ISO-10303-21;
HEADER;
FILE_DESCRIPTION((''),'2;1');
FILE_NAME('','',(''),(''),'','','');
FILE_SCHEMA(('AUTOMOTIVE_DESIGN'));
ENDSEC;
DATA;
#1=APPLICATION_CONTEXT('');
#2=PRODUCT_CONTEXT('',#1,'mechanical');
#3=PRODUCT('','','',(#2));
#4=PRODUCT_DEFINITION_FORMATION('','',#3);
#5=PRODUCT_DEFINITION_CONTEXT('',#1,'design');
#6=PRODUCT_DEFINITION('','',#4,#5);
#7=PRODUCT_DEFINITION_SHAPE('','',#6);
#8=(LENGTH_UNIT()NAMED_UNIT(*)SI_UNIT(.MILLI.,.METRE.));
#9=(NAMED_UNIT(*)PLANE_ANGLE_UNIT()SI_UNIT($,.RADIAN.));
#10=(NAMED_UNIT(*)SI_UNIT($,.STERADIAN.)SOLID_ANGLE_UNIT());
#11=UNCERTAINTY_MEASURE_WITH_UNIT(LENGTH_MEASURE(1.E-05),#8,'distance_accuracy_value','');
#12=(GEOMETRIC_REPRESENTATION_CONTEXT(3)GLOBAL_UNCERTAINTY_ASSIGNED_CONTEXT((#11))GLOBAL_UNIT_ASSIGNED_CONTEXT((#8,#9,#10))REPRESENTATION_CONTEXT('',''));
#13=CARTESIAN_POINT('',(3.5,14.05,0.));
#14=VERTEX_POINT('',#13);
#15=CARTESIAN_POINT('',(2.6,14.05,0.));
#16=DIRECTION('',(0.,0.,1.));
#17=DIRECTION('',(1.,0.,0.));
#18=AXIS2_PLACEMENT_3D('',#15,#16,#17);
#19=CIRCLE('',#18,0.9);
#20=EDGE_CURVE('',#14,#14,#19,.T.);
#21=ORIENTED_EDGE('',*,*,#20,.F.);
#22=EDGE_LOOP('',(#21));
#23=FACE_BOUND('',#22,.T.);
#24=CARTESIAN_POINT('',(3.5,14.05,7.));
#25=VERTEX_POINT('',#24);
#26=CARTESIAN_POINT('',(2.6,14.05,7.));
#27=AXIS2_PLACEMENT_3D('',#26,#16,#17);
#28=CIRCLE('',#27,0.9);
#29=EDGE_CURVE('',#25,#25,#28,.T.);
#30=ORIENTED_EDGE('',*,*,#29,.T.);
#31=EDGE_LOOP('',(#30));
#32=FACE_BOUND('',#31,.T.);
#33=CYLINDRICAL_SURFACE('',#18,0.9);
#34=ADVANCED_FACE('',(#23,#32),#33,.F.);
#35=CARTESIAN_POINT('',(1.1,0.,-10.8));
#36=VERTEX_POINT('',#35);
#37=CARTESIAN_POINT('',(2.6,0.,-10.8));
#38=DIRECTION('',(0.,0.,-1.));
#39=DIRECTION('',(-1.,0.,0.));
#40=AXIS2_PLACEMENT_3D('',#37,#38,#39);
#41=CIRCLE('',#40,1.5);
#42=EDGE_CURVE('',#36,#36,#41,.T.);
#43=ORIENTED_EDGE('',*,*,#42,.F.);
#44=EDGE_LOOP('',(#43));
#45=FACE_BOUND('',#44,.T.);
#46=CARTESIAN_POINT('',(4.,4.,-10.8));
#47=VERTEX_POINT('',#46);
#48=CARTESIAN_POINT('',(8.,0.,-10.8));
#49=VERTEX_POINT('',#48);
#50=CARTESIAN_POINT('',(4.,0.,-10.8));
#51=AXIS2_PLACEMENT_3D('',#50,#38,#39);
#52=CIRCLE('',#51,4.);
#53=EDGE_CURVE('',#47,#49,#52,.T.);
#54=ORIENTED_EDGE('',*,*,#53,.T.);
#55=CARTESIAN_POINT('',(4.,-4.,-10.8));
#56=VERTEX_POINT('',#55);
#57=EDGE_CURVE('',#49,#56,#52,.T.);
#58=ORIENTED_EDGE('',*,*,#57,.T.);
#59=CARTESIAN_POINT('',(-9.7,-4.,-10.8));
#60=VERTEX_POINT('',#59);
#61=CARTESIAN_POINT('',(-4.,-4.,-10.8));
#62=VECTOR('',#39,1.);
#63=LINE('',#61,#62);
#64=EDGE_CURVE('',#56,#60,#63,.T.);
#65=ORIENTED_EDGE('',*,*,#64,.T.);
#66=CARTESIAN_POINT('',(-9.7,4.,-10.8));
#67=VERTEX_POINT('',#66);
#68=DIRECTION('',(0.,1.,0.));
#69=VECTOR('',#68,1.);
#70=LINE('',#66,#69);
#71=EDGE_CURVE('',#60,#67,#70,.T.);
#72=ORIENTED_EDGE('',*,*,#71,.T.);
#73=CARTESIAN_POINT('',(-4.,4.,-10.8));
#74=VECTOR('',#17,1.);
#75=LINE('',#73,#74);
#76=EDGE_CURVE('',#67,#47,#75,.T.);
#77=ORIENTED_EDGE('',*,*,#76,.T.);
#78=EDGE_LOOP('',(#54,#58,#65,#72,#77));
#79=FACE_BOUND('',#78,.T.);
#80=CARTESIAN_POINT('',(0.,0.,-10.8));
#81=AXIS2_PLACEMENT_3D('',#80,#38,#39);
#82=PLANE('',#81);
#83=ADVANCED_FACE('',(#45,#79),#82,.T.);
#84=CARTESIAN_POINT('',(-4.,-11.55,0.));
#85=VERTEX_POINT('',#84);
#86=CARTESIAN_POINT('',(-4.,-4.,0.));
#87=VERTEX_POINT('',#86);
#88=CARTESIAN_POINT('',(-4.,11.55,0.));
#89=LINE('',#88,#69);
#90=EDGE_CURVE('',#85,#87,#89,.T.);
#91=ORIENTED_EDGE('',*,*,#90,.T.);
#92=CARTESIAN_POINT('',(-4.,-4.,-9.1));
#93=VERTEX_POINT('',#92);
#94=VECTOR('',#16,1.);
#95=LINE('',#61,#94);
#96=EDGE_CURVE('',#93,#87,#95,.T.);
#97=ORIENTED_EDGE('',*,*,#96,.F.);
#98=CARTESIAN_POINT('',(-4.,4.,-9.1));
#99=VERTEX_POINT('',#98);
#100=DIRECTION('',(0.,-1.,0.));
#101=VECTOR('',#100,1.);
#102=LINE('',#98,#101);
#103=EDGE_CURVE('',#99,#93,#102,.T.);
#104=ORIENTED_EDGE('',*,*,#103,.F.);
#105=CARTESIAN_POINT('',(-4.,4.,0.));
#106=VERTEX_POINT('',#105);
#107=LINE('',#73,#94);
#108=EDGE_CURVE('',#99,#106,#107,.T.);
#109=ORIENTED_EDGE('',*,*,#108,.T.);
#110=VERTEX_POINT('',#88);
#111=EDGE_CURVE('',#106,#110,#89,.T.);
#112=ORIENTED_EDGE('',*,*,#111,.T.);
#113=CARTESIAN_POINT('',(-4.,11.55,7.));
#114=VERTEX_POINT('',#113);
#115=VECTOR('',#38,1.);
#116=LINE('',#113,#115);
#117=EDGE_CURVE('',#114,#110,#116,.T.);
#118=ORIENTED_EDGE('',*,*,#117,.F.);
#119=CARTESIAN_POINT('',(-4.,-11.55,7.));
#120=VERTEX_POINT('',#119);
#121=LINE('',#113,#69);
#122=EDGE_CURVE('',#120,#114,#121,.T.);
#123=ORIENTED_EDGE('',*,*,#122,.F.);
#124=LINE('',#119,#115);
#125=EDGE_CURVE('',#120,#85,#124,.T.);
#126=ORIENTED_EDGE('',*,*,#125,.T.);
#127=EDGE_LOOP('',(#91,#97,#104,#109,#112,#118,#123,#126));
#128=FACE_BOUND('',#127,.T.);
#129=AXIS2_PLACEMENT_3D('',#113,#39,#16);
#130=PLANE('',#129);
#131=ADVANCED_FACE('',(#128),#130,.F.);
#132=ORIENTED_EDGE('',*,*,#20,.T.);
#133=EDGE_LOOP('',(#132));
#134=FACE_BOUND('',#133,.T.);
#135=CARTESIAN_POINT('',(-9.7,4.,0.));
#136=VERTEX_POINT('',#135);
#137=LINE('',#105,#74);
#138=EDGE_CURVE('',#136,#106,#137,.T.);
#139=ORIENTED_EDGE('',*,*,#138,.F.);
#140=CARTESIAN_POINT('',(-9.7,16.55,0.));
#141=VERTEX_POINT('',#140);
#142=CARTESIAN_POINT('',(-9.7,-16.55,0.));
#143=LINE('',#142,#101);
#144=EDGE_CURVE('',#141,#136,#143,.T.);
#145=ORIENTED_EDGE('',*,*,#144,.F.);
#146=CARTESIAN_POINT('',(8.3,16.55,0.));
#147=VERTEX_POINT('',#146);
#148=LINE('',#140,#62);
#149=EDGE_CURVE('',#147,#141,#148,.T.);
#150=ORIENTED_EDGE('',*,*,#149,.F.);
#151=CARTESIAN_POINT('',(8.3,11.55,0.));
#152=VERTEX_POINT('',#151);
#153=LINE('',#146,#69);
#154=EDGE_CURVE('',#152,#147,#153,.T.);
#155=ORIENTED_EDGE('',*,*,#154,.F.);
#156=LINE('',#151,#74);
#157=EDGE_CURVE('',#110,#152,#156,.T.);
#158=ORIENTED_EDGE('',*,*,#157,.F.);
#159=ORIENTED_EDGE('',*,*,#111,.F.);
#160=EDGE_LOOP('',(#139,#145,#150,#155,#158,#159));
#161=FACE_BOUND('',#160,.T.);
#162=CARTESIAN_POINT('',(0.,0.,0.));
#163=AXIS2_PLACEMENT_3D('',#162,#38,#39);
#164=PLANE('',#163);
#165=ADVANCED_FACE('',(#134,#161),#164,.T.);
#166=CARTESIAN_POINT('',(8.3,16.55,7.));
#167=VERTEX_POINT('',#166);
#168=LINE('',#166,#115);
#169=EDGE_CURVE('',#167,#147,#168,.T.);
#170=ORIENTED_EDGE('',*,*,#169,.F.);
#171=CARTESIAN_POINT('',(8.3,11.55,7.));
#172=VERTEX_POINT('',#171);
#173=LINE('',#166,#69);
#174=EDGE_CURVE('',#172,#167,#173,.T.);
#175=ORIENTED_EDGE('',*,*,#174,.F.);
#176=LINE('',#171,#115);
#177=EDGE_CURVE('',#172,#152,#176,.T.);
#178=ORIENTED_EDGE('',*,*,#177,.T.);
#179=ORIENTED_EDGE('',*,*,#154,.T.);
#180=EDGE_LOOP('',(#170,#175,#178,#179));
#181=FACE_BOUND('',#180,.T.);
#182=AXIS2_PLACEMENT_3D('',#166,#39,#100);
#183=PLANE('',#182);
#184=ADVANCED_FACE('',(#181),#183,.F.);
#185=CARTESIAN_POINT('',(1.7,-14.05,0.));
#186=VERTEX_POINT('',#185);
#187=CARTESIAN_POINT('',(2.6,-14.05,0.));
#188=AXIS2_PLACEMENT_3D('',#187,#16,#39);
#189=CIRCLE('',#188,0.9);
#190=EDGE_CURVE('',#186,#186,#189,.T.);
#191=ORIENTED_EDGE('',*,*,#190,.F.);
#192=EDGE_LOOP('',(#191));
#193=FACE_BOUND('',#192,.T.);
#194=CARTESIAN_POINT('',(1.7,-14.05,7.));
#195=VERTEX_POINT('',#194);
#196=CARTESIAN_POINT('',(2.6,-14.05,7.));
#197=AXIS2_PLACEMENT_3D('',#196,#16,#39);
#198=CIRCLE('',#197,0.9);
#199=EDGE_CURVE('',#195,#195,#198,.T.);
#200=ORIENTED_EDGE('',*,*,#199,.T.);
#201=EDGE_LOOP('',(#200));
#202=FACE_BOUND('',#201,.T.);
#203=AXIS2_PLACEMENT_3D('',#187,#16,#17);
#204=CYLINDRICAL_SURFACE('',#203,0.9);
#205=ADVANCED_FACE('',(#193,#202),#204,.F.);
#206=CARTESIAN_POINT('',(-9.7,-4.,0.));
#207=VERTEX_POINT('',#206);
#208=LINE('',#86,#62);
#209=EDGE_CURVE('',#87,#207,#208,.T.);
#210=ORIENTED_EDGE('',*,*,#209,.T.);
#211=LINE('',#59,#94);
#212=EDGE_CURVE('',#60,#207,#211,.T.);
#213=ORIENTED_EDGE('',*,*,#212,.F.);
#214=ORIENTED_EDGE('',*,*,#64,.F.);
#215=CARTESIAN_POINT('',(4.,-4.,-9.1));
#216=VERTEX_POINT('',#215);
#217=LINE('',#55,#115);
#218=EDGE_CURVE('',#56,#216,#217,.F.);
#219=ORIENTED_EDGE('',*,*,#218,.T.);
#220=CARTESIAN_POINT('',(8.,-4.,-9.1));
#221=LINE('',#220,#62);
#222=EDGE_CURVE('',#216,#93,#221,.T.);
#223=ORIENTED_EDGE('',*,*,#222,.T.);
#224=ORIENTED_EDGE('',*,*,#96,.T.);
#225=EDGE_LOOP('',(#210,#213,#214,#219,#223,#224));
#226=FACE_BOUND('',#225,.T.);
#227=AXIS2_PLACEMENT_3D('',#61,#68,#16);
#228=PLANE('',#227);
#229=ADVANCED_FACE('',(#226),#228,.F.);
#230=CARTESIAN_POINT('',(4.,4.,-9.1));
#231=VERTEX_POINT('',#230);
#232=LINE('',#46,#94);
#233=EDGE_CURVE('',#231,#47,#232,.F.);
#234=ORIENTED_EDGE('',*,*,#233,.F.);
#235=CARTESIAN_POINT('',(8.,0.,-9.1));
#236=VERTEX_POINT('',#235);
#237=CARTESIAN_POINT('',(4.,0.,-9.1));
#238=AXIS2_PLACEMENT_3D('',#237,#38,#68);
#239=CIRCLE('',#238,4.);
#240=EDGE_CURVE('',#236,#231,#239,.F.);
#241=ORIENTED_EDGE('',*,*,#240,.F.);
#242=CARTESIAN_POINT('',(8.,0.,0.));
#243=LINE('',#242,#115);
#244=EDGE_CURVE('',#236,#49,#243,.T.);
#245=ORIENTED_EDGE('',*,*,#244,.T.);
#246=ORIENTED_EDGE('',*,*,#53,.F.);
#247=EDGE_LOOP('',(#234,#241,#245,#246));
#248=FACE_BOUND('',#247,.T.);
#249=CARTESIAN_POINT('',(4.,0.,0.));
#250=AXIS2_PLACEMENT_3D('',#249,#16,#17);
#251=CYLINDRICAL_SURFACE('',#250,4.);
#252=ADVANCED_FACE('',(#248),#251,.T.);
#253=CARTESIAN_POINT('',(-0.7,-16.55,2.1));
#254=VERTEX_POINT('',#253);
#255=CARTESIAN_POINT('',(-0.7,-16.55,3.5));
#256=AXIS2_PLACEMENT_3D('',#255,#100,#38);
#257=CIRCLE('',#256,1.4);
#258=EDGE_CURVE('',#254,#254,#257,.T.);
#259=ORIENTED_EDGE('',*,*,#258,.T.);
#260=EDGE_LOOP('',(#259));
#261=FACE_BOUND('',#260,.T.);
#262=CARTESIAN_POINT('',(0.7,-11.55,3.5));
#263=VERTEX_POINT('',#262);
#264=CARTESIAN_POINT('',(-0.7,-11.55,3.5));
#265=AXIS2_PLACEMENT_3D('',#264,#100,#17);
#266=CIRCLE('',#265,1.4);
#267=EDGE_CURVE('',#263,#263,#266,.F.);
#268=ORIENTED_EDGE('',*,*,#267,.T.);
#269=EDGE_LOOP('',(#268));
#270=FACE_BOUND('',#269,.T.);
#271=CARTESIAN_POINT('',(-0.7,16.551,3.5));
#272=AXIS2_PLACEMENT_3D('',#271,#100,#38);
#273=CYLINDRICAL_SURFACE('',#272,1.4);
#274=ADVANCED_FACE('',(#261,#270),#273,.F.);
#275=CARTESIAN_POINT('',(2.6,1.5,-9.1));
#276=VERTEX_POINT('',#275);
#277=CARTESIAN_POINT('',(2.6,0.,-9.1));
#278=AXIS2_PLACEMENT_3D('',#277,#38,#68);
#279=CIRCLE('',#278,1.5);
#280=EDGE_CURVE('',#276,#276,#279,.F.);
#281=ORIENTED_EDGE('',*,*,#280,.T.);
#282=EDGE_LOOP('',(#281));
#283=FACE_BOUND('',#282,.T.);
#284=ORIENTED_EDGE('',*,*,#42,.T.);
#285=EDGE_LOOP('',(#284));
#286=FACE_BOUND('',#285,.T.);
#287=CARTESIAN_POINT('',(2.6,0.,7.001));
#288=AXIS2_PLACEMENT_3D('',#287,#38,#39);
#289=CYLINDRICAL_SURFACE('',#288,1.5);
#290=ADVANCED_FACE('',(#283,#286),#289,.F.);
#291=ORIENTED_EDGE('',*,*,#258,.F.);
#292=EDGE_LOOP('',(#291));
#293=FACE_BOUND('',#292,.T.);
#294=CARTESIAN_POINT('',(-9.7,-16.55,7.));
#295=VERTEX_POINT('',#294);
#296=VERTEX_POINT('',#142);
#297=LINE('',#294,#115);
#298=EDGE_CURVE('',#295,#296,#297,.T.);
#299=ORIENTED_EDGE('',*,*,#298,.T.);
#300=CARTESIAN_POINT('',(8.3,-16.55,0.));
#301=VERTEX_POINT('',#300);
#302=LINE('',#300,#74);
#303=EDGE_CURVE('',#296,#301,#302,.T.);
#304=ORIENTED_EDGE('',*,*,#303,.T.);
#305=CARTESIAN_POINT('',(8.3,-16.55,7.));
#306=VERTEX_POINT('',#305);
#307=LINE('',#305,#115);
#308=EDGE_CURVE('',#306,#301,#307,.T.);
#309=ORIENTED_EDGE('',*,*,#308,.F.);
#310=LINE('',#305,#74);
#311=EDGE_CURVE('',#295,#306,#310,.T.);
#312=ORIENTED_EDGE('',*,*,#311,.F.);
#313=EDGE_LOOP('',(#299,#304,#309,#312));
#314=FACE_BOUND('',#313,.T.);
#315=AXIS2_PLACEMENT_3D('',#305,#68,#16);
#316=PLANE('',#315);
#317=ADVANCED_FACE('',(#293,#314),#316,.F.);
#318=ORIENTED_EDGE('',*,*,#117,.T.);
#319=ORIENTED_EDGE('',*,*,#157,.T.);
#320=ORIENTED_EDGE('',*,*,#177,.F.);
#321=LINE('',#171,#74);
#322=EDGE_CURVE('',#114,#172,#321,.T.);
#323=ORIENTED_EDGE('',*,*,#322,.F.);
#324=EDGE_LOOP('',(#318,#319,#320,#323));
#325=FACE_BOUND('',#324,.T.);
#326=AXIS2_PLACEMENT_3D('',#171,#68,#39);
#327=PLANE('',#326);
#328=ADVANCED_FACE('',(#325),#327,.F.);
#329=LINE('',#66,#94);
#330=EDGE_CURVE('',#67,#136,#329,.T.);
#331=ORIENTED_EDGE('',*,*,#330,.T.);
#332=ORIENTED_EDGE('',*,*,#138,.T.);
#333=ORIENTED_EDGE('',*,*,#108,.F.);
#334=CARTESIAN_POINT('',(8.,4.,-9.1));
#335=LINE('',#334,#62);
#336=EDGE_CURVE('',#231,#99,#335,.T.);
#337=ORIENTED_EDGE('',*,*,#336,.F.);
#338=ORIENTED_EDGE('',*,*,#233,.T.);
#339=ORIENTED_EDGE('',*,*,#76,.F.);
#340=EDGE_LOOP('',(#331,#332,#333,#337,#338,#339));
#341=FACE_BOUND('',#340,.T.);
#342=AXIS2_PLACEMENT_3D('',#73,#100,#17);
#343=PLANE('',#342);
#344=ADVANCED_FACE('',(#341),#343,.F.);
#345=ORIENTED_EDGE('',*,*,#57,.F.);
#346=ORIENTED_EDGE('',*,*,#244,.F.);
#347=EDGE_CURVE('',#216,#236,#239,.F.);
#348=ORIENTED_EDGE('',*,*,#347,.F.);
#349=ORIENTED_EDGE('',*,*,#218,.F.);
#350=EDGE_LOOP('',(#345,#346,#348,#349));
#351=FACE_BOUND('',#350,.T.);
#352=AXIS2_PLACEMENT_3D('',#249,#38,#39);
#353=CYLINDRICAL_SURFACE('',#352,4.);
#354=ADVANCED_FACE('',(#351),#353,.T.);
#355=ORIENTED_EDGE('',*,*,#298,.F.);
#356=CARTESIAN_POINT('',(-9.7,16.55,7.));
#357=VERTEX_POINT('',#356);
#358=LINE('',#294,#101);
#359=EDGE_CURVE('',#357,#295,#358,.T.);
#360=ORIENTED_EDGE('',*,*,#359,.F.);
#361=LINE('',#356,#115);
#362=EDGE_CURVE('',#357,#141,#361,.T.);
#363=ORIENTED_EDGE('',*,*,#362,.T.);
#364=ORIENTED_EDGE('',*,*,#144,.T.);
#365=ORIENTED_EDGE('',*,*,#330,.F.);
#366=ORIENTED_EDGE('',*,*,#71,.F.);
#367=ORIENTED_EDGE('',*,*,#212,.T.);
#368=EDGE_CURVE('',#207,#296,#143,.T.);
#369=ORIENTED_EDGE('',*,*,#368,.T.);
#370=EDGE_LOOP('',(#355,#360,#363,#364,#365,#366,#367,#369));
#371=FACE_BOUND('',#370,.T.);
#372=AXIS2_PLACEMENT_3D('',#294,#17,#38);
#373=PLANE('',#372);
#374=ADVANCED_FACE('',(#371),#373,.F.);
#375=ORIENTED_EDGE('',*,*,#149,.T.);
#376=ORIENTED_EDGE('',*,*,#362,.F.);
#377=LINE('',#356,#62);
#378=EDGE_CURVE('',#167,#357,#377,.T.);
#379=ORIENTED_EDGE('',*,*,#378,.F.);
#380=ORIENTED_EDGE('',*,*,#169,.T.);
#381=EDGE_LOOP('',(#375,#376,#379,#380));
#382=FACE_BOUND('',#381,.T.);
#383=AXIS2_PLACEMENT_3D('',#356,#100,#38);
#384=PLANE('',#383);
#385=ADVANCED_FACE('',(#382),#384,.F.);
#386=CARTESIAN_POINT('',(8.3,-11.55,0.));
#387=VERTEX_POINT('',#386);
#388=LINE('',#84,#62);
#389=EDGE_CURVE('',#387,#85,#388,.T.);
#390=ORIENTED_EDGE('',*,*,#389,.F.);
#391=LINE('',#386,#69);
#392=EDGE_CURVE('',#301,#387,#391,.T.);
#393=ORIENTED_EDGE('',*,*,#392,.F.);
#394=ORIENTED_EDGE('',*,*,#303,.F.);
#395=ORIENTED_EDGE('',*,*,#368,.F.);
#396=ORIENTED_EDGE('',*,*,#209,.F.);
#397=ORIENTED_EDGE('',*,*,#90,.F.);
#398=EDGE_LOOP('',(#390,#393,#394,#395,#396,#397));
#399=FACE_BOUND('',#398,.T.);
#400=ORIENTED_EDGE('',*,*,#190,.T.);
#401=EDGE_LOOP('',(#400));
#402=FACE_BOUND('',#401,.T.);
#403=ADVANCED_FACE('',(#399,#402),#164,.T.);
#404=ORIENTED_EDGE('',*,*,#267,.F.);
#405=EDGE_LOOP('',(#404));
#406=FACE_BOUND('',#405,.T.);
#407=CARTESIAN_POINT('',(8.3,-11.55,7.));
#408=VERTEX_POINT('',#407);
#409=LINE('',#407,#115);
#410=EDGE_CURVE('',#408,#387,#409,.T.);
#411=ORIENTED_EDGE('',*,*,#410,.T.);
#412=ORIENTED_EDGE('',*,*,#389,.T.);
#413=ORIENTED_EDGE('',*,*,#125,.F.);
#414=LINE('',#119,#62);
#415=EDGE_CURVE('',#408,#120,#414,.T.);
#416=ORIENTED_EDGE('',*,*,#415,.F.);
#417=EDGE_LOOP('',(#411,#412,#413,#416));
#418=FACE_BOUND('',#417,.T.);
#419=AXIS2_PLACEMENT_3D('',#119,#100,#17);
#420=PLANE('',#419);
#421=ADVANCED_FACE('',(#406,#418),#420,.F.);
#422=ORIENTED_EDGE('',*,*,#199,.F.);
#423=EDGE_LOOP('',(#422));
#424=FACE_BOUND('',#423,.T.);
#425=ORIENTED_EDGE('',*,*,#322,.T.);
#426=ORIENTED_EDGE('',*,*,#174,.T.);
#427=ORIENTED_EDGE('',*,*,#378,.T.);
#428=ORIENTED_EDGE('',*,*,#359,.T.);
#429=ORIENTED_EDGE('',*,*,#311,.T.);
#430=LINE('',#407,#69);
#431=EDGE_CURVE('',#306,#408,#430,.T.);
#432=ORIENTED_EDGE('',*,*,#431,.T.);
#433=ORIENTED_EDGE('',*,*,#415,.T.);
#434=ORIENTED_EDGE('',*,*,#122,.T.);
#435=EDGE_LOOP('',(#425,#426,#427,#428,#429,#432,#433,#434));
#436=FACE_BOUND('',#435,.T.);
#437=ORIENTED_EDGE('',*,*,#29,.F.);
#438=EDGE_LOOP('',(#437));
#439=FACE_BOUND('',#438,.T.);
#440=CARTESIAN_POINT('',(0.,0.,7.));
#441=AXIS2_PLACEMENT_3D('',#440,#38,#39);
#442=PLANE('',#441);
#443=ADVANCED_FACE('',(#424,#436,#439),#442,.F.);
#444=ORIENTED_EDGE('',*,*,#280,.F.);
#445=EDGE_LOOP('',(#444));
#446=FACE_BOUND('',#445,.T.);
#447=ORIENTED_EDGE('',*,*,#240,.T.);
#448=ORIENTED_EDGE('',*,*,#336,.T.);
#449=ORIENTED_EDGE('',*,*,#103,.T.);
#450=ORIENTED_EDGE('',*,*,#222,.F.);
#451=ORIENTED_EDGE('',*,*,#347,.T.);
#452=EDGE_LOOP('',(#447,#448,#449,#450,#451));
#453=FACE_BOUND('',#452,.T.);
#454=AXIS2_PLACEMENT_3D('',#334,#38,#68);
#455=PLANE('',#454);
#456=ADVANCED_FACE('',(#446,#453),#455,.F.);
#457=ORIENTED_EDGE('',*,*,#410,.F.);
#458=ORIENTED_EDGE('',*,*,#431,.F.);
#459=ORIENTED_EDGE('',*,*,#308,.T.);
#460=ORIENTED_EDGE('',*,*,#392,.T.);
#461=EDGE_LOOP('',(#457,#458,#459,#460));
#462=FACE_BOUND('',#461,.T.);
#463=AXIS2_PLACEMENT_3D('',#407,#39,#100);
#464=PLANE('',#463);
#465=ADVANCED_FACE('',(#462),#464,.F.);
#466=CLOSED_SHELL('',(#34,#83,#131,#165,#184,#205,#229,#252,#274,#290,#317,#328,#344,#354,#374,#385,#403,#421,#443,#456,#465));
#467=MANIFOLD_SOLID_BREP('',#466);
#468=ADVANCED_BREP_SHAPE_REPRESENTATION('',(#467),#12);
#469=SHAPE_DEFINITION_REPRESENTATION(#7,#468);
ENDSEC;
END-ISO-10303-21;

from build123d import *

# Parameters (mm, degrees)
ESTRUSIONE_ESTRUSIONE1_DEPTH = 7
SCHIZZO2_R                   = 0.9
TAGLIO_ESTRUSIONE1_DEPTH     = 21.420394218
TAGLIO_ESTRUSIONE2_REACH     = 37.195
SCHIZZO3_R                   = 1.4
SCHIZZO4_W                   = 5.7
SCHIZZO4_H                   = 8
ESTRUSIONE_ESTRUSIONE2_DEPTH = 10.8
SCHIZZO5_W                   = 1.7
SCHIZZO5_H                   = 8
ESTRUSIONE_ESTRUSIONE3_DEPTH = 12
RACCORDO1_R                  = 4
TAGLIO_ESTRUSIONE3_REACH     = 28.169
SCHIZZO6_R                   = 1.5


with BuildPart() as part:
    # Schizzo1 → Estrusione-Estrusione1 (new body)
    with BuildSketch(Plane.XY):
        Polygon((8.3, 11.55), (-4, 11.55), (-4, -11.55), (8.3, -11.55), (8.3, -16.55), (-9.7, -16.55), (-9.7, 16.55), (8.3, 16.55), align=None)
    extrude(amount=ESTRUSIONE_ESTRUSIONE1_DEPTH)

    # Schizzo2 → Taglio-Estrusione1 (cut, through all)
    with BuildSketch(Plane.XY.offset(7)):
        with Locations((2.6, 14.05)):
            Circle(SCHIZZO2_R)
        with Locations(Location((2.6, -14.05, 0), (0, 0, 180))):
            Circle(SCHIZZO2_R)
    extrude(amount=-TAGLIO_ESTRUSIONE1_DEPTH, mode=Mode.SUBTRACT)

    # Schizzo3 → Taglio-Estrusione2 (cut, up to next)
    with BuildSketch(Plane.XZ.offset(16.55), mode=Mode.PRIVATE) as taglio_estrusione2_sk1:
        with Locations(Location((-0.7, 3.5, 0), (0, 0, 270))):
            Circle(SCHIZZO3_R)
    taglio_estrusione2_tool1 = extrude(taglio_estrusione2_sk1.sketch, amount=-TAGLIO_ESTRUSIONE2_REACH, mode=Mode.PRIVATE) & part.part
    add(taglio_estrusione2_tool1.solids().sort_by_distance((-0.7, -16.55, 3.5))[0], mode=Mode.SUBTRACT)

    # Schizzo4 → Estrusione-Estrusione2 (add)
    with BuildSketch(Plane(origin=(0, 0, 0), x_dir=(-1, 0, 0), z_dir=(0, 0, -1))):
        with Locations((6.85, 0)):
            Rectangle(SCHIZZO4_W, SCHIZZO4_H)
    extrude(amount=ESTRUSIONE_ESTRUSIONE2_DEPTH)

    # Schizzo5 → Estrusione-Estrusione3 (add)
    with BuildSketch(Plane(origin=(-4, 0, 0), x_dir=(0, 0, -1), z_dir=(1, 0, 0))):
        with Locations((9.95, 0)):
            Rectangle(SCHIZZO5_W, SCHIZZO5_H)
    extrude(amount=ESTRUSIONE_ESTRUSIONE3_DEPTH)

    # Raccordo1
    raccordo1_edges = [part.edges().sort_by_distance(p)[0] for p in [
        (8, 4, -9.95),
        (8, -4, -9.95),
    ]]
    fillet(raccordo1_edges, radius=RACCORDO1_R - 0.0001)  # a hair under: the kernel refuses the full size

    # Schizzo6 → Taglio-Estrusione3 (cut, up to next)
    with BuildSketch(Plane(origin=(0, 0, -10.8), x_dir=(-1, 0, 0), z_dir=(0, 0, -1)), mode=Mode.PRIVATE) as taglio_estrusione3_sk1:
        with Locations((-2.6, 0)):
            Circle(SCHIZZO6_R)
    taglio_estrusione3_tool1 = extrude(taglio_estrusione3_sk1.sketch, amount=-TAGLIO_ESTRUSIONE3_REACH, mode=Mode.PRIVATE) & part.part
    add(taglio_estrusione3_tool1.solids().sort_by_distance((2.6, 0, -10.8))[0], mode=Mode.SUBTRACT)


solid = part.part
